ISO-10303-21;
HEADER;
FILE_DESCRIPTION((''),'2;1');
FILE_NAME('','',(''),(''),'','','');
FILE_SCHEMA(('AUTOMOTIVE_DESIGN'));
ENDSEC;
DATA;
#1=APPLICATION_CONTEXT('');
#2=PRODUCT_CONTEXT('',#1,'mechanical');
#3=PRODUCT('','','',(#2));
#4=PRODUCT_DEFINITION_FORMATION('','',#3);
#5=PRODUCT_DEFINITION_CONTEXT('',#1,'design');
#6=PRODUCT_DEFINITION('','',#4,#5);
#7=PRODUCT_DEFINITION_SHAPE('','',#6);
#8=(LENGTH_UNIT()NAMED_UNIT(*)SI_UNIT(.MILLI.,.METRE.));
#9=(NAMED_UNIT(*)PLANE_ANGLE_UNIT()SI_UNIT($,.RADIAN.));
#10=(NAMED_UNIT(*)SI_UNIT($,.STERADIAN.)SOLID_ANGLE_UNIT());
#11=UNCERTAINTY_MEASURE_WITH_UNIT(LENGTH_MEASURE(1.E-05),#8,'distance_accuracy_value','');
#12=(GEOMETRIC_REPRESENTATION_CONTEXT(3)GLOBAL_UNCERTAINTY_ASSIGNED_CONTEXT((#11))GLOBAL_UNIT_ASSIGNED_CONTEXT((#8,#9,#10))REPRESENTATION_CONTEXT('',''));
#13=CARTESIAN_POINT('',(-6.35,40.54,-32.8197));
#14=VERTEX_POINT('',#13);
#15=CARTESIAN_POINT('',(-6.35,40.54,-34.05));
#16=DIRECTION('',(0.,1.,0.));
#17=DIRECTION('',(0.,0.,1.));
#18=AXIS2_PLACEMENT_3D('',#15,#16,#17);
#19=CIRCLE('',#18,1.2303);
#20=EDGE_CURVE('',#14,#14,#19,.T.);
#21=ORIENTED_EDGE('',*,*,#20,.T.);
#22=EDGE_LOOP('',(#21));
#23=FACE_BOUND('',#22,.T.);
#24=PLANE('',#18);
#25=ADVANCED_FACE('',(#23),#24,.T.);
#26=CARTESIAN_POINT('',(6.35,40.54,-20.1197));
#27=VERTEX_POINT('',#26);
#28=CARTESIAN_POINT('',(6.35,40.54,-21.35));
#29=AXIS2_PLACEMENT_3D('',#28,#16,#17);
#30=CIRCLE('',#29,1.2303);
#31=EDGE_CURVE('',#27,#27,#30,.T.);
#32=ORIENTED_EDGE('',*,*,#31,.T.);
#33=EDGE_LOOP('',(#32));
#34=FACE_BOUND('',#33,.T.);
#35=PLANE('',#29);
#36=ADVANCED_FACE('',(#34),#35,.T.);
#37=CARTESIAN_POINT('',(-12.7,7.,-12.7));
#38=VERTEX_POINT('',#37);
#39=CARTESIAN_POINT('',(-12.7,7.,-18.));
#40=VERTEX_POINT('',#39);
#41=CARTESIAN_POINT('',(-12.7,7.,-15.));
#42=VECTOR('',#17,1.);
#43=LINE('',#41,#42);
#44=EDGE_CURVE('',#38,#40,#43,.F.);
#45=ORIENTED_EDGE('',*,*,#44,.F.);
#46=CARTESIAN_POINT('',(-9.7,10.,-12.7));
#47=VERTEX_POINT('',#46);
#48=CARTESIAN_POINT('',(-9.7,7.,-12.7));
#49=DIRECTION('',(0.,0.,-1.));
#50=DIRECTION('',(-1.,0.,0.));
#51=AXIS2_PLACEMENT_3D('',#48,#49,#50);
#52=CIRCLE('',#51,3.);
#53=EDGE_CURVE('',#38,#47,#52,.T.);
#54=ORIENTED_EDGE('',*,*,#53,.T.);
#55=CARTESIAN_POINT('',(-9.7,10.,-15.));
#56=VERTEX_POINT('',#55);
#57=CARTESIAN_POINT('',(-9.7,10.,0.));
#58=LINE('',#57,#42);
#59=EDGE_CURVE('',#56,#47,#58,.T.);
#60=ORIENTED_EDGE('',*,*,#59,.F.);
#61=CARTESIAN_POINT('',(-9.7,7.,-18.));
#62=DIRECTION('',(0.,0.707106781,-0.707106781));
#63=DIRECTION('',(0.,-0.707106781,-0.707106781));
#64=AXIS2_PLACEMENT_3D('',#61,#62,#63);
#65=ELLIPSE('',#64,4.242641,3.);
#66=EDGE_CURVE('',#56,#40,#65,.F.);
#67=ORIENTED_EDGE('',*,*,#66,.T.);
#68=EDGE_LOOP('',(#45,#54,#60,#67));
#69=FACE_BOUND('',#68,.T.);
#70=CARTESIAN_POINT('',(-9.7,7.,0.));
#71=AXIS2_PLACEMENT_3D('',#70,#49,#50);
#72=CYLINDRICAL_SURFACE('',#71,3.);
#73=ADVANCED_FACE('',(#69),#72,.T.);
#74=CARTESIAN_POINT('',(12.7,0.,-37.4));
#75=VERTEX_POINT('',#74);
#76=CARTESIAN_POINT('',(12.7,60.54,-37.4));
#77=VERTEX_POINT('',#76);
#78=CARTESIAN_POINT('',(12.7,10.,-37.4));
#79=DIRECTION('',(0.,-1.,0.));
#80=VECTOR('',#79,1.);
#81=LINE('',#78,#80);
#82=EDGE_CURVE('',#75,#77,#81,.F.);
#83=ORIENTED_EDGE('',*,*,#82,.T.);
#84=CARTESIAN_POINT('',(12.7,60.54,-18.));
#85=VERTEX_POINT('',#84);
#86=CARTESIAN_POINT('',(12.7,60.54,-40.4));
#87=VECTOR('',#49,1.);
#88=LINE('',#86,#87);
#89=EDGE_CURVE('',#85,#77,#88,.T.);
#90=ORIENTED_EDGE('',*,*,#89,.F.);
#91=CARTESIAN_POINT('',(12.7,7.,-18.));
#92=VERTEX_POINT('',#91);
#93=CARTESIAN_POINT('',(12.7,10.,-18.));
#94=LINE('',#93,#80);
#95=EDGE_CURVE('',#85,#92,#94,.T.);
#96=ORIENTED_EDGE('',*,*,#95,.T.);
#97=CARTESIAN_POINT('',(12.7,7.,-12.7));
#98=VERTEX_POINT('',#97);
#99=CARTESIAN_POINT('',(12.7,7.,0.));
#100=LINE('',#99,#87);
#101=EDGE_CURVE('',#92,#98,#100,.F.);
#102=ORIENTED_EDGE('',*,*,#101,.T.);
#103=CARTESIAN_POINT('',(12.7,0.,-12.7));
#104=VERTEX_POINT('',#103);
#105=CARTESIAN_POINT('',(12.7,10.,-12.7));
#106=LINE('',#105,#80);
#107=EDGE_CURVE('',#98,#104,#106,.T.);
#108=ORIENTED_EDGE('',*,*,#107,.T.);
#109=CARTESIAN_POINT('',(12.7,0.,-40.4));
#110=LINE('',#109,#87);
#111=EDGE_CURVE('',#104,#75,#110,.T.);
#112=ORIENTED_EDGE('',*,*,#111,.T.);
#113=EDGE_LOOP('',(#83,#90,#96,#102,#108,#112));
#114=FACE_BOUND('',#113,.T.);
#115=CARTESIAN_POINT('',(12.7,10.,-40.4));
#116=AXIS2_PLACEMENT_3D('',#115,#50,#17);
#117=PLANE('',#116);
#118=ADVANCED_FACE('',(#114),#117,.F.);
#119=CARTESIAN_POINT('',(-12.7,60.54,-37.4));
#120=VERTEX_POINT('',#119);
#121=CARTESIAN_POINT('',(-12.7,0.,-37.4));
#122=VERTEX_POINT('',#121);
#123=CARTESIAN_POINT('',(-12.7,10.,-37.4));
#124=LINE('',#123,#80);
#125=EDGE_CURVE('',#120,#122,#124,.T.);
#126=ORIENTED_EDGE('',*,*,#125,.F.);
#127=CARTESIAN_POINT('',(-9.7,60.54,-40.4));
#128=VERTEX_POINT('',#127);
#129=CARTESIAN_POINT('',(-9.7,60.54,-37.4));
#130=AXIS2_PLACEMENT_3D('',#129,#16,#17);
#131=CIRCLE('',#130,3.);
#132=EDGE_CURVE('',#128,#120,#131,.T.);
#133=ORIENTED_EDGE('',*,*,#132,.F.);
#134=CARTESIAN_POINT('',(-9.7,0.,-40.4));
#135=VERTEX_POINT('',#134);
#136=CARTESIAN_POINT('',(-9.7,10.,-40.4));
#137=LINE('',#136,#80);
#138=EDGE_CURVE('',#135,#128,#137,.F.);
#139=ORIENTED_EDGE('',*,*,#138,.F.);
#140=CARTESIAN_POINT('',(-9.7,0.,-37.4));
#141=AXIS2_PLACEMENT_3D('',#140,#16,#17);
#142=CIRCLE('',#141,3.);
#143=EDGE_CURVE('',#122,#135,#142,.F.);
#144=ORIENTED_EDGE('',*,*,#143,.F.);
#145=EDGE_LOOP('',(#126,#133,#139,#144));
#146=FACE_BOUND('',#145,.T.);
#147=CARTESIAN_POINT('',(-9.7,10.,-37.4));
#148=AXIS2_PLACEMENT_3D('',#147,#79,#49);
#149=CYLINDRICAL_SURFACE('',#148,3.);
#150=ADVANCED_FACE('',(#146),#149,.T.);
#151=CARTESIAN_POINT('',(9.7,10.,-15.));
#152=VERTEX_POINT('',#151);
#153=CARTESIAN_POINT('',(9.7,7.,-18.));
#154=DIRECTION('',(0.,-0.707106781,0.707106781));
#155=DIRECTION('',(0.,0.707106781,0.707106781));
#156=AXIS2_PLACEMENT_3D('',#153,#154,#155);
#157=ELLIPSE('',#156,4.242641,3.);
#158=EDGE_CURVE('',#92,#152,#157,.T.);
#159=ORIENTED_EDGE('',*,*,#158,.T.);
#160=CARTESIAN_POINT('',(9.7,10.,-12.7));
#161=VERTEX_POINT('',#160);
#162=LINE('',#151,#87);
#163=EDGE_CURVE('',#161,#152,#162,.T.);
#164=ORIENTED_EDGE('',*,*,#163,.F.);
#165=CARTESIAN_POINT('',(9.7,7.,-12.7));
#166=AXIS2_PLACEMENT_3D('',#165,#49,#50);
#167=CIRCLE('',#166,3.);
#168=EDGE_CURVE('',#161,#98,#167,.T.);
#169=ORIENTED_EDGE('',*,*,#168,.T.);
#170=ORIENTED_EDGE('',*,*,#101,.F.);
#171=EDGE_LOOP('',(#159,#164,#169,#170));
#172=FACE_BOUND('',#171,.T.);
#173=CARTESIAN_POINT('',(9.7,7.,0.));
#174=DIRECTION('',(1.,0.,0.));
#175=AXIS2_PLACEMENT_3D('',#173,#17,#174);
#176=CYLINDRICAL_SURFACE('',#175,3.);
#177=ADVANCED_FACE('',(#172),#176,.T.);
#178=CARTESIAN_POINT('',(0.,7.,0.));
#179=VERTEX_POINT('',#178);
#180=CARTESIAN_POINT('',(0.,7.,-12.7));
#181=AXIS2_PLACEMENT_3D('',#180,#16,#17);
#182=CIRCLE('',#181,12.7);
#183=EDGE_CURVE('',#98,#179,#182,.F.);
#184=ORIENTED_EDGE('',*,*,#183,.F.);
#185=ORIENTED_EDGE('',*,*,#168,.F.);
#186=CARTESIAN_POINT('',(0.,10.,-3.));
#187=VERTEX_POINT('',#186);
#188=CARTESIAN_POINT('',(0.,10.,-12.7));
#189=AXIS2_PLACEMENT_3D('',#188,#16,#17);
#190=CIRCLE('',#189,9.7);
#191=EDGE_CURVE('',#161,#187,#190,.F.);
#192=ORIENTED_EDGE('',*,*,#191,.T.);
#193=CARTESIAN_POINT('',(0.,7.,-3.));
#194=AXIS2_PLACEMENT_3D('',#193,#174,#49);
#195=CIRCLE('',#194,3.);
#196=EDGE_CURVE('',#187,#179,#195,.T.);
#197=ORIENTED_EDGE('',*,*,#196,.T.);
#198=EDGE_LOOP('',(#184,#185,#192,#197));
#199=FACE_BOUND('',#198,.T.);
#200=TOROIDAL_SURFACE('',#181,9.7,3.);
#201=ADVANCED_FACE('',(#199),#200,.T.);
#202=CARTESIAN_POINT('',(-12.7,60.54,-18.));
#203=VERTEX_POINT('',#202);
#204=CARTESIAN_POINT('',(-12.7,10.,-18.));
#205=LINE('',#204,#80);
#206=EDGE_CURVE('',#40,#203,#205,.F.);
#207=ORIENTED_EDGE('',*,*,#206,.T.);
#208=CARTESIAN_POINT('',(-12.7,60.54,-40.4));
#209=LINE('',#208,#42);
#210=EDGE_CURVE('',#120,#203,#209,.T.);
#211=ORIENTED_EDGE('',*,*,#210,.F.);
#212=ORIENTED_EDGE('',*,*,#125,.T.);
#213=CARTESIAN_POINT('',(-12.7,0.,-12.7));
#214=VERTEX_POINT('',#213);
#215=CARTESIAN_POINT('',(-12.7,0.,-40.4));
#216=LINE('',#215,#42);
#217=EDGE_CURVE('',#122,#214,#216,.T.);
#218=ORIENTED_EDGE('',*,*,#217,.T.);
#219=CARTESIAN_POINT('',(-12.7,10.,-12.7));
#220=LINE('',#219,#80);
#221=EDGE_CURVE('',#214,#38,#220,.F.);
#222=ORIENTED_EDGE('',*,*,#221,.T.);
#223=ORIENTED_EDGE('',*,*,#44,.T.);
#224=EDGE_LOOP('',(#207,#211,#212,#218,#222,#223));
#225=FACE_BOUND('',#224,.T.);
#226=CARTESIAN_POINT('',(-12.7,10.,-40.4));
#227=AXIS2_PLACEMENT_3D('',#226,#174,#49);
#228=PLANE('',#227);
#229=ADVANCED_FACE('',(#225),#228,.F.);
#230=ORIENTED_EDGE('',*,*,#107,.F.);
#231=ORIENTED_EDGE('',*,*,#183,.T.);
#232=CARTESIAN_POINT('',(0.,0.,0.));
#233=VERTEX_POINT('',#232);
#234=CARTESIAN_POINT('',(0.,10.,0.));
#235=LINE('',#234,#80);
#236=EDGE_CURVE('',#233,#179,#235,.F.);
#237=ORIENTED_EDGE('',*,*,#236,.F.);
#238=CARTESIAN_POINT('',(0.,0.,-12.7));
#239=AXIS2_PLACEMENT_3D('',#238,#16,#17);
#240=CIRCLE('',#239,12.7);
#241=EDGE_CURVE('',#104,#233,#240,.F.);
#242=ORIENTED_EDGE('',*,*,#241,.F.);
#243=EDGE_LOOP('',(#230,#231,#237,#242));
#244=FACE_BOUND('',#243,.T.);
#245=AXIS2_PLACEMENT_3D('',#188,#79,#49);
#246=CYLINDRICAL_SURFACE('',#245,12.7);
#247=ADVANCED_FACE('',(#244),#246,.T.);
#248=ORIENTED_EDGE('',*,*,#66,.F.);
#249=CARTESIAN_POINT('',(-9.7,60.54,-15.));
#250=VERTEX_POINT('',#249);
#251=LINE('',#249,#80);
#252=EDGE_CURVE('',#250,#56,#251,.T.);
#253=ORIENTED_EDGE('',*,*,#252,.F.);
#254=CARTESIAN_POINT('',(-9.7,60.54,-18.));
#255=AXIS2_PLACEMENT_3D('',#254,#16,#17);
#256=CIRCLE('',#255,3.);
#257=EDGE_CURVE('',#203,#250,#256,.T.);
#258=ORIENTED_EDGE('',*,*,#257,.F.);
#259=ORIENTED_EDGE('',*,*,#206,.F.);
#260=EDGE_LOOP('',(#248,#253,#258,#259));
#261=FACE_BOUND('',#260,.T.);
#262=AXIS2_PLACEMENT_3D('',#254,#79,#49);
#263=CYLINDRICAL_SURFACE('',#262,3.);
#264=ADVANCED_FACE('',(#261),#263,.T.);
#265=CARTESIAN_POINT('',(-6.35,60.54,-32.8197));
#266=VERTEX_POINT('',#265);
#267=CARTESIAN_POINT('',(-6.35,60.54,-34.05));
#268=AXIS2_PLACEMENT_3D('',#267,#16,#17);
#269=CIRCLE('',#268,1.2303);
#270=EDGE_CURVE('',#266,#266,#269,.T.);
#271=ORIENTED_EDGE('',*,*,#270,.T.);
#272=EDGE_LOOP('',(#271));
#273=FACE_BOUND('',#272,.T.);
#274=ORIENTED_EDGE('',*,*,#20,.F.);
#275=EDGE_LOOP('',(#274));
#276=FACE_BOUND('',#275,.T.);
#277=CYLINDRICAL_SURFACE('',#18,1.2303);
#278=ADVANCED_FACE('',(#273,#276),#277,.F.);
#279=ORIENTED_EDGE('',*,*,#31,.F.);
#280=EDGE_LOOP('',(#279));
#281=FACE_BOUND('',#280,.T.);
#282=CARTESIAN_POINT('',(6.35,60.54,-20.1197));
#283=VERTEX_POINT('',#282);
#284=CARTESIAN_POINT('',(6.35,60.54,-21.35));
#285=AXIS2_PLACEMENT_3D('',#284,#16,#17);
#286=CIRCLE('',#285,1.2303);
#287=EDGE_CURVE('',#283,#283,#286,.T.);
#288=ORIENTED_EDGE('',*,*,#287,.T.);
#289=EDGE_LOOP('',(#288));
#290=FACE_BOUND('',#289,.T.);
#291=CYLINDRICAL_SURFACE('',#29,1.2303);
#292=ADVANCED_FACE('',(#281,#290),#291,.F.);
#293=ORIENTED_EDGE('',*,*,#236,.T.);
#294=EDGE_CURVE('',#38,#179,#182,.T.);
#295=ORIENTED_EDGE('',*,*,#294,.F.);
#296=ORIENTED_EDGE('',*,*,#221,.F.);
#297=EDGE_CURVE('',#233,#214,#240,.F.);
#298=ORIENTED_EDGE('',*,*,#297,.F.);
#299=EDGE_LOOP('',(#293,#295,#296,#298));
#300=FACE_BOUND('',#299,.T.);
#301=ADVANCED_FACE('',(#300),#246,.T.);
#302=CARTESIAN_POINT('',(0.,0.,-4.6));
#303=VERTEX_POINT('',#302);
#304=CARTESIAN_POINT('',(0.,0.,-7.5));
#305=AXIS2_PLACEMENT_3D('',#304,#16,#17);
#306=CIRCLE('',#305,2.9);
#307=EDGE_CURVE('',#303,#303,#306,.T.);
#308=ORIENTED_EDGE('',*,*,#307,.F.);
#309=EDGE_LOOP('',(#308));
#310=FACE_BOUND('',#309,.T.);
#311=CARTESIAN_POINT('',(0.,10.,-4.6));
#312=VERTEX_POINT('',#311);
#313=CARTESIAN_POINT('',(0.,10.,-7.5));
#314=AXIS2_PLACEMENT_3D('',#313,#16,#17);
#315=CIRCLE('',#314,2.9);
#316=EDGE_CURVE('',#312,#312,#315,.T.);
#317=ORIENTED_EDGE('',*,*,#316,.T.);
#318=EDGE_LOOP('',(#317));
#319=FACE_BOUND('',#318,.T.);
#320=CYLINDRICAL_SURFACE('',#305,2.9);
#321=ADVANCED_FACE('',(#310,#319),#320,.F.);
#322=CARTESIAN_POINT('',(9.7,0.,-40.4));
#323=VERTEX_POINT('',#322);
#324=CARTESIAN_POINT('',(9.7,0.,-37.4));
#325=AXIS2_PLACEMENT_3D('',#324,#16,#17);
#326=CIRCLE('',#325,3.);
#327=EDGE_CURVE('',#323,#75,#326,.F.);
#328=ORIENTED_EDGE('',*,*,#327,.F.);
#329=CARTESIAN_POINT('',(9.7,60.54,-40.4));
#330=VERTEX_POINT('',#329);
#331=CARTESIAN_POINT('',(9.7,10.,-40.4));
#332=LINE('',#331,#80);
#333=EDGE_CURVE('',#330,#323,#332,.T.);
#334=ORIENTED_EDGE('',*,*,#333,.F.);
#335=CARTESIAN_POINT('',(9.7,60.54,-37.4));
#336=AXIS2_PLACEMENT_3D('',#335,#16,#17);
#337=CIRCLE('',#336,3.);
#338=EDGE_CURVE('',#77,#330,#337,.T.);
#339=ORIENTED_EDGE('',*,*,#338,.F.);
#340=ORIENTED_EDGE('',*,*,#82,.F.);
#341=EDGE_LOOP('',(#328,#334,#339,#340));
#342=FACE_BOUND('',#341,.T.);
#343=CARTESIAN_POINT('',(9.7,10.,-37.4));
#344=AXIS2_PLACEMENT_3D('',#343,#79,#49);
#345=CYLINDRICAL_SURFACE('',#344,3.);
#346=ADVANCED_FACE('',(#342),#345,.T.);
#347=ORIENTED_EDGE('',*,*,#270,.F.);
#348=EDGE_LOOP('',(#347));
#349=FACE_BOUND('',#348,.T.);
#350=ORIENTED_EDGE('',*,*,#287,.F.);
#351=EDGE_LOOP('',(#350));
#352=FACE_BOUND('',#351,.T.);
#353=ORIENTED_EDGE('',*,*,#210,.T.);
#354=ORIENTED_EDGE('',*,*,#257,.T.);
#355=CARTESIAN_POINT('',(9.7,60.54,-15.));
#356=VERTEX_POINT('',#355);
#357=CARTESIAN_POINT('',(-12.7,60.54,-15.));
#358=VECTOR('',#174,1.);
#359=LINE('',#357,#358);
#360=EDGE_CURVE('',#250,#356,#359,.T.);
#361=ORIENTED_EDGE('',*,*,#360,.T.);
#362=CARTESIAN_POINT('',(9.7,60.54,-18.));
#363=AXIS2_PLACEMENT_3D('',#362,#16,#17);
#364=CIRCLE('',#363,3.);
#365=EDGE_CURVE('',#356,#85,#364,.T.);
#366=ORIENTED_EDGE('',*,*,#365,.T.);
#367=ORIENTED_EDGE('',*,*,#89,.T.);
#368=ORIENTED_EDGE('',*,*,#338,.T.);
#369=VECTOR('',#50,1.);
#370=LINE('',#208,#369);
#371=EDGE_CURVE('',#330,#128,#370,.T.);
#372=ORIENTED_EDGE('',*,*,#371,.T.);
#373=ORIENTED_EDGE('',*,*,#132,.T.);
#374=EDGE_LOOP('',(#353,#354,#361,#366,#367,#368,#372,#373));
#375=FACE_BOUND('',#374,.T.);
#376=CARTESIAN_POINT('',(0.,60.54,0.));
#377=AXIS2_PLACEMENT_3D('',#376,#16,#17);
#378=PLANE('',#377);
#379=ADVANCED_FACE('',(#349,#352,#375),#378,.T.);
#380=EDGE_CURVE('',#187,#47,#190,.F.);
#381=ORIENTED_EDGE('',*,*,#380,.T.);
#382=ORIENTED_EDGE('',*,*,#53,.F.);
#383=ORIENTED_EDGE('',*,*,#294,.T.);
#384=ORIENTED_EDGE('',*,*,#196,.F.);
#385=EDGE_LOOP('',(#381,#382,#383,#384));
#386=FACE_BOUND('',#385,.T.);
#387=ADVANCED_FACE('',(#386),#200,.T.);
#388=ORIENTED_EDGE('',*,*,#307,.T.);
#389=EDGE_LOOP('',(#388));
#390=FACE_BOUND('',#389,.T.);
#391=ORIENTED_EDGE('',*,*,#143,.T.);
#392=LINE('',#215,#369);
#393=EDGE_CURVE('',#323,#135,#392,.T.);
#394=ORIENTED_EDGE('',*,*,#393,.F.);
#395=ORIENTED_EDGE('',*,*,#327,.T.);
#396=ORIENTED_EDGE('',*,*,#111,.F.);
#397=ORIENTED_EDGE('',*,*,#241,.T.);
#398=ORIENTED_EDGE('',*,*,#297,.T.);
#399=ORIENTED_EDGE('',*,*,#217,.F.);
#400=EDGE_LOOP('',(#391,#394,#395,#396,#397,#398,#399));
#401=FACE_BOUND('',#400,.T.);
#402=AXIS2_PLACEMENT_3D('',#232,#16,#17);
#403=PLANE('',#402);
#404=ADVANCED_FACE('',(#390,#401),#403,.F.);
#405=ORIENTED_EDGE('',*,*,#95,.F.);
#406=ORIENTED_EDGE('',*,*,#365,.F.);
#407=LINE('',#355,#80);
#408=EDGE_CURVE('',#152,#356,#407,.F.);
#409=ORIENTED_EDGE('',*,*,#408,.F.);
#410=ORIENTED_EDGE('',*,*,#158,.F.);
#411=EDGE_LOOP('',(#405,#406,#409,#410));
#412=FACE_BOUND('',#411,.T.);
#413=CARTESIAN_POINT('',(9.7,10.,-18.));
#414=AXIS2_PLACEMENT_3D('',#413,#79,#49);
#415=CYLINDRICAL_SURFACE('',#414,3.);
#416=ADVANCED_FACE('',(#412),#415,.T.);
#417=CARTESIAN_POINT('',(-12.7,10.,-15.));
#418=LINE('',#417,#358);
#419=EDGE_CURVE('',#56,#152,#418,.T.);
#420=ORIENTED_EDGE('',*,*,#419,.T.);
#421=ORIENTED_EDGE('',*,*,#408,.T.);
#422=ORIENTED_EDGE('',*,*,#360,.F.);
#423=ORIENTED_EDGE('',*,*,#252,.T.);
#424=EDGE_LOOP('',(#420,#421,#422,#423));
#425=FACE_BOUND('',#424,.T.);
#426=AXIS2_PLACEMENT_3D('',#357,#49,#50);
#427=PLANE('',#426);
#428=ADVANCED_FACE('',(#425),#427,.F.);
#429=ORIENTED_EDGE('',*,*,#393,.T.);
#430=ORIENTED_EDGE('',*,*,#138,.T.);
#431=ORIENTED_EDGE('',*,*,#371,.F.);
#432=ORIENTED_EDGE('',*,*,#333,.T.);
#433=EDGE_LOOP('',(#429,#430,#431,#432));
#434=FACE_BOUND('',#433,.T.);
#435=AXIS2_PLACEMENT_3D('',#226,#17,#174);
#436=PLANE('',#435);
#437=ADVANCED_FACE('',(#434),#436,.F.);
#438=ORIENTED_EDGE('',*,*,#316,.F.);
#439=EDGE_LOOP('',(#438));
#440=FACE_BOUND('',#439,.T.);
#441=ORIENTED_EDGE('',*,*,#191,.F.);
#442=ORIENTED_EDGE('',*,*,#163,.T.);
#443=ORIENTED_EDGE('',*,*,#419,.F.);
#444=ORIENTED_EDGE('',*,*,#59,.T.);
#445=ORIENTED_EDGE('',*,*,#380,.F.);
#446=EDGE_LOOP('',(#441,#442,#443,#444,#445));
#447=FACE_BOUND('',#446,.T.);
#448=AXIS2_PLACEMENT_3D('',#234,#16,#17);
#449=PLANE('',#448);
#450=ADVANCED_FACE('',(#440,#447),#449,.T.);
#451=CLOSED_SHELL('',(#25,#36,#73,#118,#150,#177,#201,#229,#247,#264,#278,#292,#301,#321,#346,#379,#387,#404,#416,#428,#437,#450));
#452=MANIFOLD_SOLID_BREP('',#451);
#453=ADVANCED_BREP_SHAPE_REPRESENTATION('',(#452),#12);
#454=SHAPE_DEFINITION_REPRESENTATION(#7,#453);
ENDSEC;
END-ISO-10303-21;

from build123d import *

# Parameters (mm, degrees)
SKETCH1_W           = 25.4
SKETCH1_H           = 40.4
BOSS_EXTRUDE1_DEPTH = 10
SKETCH2_W           = 25.4
SKETCH2_H           = 25.4
BOSS_EXTRUDE2_DEPTH = 50.54
SKETCH3_R           = 1.2303
CUT_EXTRUDE1_DEPTH  = 20
SKETCH4_R           = 2.9
CUT_EXTRUDE2_DEPTH  = 66.937406682
FILLET1_R           = 3
FILLET2_R           = 12.7


with BuildPart() as part:
    # Sketch1 → Boss-Extrude1 (new body)
    with BuildSketch(Plane(origin=(0, 0, 0), x_dir=(1, 0, 0), z_dir=(0, 1, 0))):
        with Locations((0, 20.2)):
            Rectangle(SKETCH1_W, SKETCH1_H)
    extrude(amount=BOSS_EXTRUDE1_DEPTH)

    # Sketch2 → Boss-Extrude2 (add)
    with BuildSketch(Plane(origin=(0, 10, 0), x_dir=(1, 0, 0), z_dir=(0, 1, 0))):
        with Locations((0, 27.7)):
            Rectangle(SKETCH2_W, SKETCH2_H)
    extrude(amount=BOSS_EXTRUDE2_DEPTH)

    # Sketch3 → Cut-Extrude1 (cut)
    with BuildSketch(Plane(origin=(0, 60.54, 0), x_dir=(1, 0, 0), z_dir=(0, 1, 0))):
        with Locations(Location((-6.35, 34.05, 0), (0, 0, 270))):
            Circle(SKETCH3_R)
        with Locations(Location((6.35, 21.35, 0), (0, 0, 270))):
            Circle(SKETCH3_R)
    extrude(amount=-CUT_EXTRUDE1_DEPTH, mode=Mode.SUBTRACT)

    # Sketch4 → Cut-Extrude2 (cut, through all)
    with BuildSketch(Plane(origin=(0, 10, 0), x_dir=(1, 0, 0), z_dir=(0, 1, 0))):
        with Locations(Location((0, 7.5, 0), (0, 0, 270))):
            Circle(SKETCH4_R)
    extrude(amount=-CUT_EXTRUDE2_DEPTH, mode=Mode.SUBTRACT)

    # Fillet1
    fillet1_edges = [part.edges().sort_by_distance(p)[0] for p in [
        (12.7, 10, -7.5),
        (-12.7, 10, -7.5),
        (-12.7, 35.27, -15),
        (12.7, 35.27, -15),
        (0, 10, 0),
        (-12.7, 30.27, -40.4),
        (12.7, 30.27, -40.4),
    ]]
    fillet(fillet1_edges, radius=FILLET1_R)

    # Fillet2
    # the kernel refuses this fillet: 12.7 mm, written as the material it takes off along each edge
    with BuildSketch(Plane(origin=(0, 10, -12.7), x_dir=(-1, 0, 0), z_dir=(0, 0, -1))) as fillet2_piece_1:
        with BuildLine():
            CenterArc((9.7, -3), 3, 0, 90)
            Line((12.7, -3), (12.7, 0))
            Line((12.7, 0), (9.7, 0))
        make_face()
    revolve(axis=Axis((0, 10, -12.7), (0, 1, 0)), revolution_arc=90, mode=Mode.SUBTRACT)
    with BuildSketch(Plane(origin=(0, 10, -12.7), x_dir=(0, 0, 1), z_dir=(-1, 0, 0))) as fillet2_piece_2:
        with BuildLine():
            CenterArc((9.7, -3), 3, 0, 90)
            Line((12.7, -3), (12.7, 0))
            Line((12.7, 0), (9.7, 0))
        make_face()
    revolve(axis=Axis((0, 10, -12.7), (0, 1, 0)), revolution_arc=90, mode=Mode.SUBTRACT)
    with BuildSketch(Plane(origin=(12.7, -31.75, 0), x_dir=(0, 0, -1), z_dir=(0, 1, 0))) as fillet2_piece_3:
        with BuildLine():
            CenterArc((FILLET2_R, FILLET2_R), FILLET2_R, 180, 90)
            Line((0, FILLET2_R), (0, 0))
            Line((0, 0), (FILLET2_R, 0))
        make_face()
    extrude(amount=41.75, mode=Mode.SUBTRACT)
    with BuildSketch(Plane(origin=(-12.7, -31.75, 0), x_dir=(0, 0, -1), z_dir=(0, 1, 0))) as fillet2_piece_4:
        with BuildLine():
            CenterArc((FILLET2_R, -FILLET2_R), FILLET2_R, 90, 90)
            Line((0, -FILLET2_R), (0, 0))
            Line((0, 0), (FILLET2_R, 0))
        make_face()
    extrude(amount=41.75, mode=Mode.SUBTRACT)


solid = part.part
